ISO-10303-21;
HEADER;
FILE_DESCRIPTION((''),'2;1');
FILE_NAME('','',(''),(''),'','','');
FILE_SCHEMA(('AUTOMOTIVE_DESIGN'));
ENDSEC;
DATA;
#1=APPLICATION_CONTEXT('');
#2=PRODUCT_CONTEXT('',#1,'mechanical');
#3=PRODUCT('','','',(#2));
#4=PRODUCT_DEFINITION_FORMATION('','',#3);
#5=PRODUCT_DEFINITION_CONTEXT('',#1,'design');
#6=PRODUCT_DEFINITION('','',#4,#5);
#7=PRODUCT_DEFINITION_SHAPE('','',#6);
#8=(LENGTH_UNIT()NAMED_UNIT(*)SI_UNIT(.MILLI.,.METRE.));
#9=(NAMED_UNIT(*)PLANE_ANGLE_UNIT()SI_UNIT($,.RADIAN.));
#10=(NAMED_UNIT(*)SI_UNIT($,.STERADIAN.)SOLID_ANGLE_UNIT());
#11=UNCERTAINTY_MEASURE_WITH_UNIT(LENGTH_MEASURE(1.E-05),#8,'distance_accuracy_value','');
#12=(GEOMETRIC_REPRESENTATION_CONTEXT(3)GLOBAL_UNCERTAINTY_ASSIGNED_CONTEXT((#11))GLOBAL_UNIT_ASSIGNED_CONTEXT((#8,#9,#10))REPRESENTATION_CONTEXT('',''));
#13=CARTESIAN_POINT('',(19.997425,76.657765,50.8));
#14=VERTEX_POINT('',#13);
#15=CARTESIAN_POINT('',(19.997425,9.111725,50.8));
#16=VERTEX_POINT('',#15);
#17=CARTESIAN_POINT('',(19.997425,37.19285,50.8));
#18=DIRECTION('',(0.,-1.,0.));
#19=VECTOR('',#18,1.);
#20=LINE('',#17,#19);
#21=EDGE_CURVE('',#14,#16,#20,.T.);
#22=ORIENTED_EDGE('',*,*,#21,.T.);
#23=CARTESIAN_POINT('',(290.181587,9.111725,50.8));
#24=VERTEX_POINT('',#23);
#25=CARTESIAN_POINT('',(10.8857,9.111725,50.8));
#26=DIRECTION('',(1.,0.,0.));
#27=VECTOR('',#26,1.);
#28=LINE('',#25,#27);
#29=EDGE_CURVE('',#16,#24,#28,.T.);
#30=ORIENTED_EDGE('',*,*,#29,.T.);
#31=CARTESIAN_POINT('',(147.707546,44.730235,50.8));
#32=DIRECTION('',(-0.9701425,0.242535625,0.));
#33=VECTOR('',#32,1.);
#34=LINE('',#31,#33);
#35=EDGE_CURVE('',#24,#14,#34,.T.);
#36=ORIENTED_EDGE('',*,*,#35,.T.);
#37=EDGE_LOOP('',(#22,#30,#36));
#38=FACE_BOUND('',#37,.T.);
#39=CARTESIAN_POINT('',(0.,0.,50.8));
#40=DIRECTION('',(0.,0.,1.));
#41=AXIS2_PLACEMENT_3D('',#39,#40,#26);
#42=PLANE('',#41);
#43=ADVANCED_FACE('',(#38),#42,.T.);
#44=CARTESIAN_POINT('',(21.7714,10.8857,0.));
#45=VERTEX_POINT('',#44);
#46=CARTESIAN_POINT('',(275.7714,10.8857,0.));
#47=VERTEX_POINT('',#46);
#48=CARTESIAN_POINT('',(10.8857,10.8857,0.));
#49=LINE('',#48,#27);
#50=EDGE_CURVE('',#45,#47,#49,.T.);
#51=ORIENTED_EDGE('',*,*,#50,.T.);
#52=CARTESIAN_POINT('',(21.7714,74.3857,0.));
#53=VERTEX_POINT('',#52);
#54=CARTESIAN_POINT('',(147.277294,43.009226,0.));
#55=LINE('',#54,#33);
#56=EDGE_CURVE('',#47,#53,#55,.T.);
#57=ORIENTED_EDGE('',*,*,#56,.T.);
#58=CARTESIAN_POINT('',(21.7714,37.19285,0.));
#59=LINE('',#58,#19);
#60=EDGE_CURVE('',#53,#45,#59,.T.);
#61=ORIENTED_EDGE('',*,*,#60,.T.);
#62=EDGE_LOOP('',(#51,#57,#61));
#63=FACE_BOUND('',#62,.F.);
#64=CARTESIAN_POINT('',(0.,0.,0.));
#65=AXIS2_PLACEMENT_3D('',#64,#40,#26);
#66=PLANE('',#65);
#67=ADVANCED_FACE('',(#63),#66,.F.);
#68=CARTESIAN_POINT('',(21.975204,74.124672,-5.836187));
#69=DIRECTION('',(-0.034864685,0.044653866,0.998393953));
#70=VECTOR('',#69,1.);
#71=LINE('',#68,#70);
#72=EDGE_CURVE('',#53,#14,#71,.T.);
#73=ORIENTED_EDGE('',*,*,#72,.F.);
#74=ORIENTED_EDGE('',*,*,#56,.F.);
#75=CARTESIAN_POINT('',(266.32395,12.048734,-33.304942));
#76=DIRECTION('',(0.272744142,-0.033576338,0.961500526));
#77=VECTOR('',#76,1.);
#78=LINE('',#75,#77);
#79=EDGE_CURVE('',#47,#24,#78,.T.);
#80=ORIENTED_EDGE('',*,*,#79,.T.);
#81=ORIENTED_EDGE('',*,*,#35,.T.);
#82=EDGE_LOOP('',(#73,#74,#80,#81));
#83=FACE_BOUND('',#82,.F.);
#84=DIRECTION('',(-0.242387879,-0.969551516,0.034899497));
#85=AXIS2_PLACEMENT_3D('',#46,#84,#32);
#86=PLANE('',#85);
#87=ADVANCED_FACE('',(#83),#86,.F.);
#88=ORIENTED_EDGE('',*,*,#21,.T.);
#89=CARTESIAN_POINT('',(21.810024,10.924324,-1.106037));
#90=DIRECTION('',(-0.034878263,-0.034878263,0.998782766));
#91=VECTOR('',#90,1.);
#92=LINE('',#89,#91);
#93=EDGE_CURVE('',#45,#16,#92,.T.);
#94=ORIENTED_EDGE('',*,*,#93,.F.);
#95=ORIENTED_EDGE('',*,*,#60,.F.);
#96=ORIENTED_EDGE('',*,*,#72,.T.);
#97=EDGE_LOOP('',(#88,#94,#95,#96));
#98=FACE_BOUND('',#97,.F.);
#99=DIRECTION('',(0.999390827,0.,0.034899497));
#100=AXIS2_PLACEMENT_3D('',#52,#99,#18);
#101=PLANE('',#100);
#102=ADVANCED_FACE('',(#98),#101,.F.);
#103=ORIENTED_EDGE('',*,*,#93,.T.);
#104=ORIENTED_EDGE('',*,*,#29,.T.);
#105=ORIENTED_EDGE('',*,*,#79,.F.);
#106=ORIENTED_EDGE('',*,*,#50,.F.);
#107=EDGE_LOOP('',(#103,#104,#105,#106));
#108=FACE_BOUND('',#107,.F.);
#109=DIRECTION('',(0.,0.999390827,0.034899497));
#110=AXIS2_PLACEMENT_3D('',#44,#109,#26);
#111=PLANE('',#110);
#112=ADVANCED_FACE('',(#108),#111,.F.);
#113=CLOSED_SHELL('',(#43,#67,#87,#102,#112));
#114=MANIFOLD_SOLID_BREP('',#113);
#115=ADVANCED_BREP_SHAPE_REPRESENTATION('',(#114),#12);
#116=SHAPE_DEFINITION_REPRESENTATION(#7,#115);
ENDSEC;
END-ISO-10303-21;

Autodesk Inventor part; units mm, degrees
ref_plane "YZ Plane" through (0, 0, 0) normal (1, 0, 0) x (0, 1, 0)
ref_plane "XZ Plane" through (0, 0, 0) normal (0, 1, 0) x (-1, 0, 0)
ref_plane "XY Plane" through (0, 0, 0) normal (0, 0, 1) x (1, 0, 0)
sketch "Sketch1" plane through (0, 0, 0) normal (0, 0, 1) x (1, 0, 0)
  line L0 (21.7714, 74.3857) -> (21.7714, 10.8857)
  line L1 (21.7714, 10.8857) -> (275.7714, 10.8857)
  line L2 (275.7714, 10.8857) -> (21.7714, 74.3857)
  point P0 (0, 0)
  dimension "d0" = 63.5
  dimension "d1" = 254
extrude "Extrusion1" add sketch "Sketch1" along normal blind 50.8 draft 2
properties part number "Domino ramp"
